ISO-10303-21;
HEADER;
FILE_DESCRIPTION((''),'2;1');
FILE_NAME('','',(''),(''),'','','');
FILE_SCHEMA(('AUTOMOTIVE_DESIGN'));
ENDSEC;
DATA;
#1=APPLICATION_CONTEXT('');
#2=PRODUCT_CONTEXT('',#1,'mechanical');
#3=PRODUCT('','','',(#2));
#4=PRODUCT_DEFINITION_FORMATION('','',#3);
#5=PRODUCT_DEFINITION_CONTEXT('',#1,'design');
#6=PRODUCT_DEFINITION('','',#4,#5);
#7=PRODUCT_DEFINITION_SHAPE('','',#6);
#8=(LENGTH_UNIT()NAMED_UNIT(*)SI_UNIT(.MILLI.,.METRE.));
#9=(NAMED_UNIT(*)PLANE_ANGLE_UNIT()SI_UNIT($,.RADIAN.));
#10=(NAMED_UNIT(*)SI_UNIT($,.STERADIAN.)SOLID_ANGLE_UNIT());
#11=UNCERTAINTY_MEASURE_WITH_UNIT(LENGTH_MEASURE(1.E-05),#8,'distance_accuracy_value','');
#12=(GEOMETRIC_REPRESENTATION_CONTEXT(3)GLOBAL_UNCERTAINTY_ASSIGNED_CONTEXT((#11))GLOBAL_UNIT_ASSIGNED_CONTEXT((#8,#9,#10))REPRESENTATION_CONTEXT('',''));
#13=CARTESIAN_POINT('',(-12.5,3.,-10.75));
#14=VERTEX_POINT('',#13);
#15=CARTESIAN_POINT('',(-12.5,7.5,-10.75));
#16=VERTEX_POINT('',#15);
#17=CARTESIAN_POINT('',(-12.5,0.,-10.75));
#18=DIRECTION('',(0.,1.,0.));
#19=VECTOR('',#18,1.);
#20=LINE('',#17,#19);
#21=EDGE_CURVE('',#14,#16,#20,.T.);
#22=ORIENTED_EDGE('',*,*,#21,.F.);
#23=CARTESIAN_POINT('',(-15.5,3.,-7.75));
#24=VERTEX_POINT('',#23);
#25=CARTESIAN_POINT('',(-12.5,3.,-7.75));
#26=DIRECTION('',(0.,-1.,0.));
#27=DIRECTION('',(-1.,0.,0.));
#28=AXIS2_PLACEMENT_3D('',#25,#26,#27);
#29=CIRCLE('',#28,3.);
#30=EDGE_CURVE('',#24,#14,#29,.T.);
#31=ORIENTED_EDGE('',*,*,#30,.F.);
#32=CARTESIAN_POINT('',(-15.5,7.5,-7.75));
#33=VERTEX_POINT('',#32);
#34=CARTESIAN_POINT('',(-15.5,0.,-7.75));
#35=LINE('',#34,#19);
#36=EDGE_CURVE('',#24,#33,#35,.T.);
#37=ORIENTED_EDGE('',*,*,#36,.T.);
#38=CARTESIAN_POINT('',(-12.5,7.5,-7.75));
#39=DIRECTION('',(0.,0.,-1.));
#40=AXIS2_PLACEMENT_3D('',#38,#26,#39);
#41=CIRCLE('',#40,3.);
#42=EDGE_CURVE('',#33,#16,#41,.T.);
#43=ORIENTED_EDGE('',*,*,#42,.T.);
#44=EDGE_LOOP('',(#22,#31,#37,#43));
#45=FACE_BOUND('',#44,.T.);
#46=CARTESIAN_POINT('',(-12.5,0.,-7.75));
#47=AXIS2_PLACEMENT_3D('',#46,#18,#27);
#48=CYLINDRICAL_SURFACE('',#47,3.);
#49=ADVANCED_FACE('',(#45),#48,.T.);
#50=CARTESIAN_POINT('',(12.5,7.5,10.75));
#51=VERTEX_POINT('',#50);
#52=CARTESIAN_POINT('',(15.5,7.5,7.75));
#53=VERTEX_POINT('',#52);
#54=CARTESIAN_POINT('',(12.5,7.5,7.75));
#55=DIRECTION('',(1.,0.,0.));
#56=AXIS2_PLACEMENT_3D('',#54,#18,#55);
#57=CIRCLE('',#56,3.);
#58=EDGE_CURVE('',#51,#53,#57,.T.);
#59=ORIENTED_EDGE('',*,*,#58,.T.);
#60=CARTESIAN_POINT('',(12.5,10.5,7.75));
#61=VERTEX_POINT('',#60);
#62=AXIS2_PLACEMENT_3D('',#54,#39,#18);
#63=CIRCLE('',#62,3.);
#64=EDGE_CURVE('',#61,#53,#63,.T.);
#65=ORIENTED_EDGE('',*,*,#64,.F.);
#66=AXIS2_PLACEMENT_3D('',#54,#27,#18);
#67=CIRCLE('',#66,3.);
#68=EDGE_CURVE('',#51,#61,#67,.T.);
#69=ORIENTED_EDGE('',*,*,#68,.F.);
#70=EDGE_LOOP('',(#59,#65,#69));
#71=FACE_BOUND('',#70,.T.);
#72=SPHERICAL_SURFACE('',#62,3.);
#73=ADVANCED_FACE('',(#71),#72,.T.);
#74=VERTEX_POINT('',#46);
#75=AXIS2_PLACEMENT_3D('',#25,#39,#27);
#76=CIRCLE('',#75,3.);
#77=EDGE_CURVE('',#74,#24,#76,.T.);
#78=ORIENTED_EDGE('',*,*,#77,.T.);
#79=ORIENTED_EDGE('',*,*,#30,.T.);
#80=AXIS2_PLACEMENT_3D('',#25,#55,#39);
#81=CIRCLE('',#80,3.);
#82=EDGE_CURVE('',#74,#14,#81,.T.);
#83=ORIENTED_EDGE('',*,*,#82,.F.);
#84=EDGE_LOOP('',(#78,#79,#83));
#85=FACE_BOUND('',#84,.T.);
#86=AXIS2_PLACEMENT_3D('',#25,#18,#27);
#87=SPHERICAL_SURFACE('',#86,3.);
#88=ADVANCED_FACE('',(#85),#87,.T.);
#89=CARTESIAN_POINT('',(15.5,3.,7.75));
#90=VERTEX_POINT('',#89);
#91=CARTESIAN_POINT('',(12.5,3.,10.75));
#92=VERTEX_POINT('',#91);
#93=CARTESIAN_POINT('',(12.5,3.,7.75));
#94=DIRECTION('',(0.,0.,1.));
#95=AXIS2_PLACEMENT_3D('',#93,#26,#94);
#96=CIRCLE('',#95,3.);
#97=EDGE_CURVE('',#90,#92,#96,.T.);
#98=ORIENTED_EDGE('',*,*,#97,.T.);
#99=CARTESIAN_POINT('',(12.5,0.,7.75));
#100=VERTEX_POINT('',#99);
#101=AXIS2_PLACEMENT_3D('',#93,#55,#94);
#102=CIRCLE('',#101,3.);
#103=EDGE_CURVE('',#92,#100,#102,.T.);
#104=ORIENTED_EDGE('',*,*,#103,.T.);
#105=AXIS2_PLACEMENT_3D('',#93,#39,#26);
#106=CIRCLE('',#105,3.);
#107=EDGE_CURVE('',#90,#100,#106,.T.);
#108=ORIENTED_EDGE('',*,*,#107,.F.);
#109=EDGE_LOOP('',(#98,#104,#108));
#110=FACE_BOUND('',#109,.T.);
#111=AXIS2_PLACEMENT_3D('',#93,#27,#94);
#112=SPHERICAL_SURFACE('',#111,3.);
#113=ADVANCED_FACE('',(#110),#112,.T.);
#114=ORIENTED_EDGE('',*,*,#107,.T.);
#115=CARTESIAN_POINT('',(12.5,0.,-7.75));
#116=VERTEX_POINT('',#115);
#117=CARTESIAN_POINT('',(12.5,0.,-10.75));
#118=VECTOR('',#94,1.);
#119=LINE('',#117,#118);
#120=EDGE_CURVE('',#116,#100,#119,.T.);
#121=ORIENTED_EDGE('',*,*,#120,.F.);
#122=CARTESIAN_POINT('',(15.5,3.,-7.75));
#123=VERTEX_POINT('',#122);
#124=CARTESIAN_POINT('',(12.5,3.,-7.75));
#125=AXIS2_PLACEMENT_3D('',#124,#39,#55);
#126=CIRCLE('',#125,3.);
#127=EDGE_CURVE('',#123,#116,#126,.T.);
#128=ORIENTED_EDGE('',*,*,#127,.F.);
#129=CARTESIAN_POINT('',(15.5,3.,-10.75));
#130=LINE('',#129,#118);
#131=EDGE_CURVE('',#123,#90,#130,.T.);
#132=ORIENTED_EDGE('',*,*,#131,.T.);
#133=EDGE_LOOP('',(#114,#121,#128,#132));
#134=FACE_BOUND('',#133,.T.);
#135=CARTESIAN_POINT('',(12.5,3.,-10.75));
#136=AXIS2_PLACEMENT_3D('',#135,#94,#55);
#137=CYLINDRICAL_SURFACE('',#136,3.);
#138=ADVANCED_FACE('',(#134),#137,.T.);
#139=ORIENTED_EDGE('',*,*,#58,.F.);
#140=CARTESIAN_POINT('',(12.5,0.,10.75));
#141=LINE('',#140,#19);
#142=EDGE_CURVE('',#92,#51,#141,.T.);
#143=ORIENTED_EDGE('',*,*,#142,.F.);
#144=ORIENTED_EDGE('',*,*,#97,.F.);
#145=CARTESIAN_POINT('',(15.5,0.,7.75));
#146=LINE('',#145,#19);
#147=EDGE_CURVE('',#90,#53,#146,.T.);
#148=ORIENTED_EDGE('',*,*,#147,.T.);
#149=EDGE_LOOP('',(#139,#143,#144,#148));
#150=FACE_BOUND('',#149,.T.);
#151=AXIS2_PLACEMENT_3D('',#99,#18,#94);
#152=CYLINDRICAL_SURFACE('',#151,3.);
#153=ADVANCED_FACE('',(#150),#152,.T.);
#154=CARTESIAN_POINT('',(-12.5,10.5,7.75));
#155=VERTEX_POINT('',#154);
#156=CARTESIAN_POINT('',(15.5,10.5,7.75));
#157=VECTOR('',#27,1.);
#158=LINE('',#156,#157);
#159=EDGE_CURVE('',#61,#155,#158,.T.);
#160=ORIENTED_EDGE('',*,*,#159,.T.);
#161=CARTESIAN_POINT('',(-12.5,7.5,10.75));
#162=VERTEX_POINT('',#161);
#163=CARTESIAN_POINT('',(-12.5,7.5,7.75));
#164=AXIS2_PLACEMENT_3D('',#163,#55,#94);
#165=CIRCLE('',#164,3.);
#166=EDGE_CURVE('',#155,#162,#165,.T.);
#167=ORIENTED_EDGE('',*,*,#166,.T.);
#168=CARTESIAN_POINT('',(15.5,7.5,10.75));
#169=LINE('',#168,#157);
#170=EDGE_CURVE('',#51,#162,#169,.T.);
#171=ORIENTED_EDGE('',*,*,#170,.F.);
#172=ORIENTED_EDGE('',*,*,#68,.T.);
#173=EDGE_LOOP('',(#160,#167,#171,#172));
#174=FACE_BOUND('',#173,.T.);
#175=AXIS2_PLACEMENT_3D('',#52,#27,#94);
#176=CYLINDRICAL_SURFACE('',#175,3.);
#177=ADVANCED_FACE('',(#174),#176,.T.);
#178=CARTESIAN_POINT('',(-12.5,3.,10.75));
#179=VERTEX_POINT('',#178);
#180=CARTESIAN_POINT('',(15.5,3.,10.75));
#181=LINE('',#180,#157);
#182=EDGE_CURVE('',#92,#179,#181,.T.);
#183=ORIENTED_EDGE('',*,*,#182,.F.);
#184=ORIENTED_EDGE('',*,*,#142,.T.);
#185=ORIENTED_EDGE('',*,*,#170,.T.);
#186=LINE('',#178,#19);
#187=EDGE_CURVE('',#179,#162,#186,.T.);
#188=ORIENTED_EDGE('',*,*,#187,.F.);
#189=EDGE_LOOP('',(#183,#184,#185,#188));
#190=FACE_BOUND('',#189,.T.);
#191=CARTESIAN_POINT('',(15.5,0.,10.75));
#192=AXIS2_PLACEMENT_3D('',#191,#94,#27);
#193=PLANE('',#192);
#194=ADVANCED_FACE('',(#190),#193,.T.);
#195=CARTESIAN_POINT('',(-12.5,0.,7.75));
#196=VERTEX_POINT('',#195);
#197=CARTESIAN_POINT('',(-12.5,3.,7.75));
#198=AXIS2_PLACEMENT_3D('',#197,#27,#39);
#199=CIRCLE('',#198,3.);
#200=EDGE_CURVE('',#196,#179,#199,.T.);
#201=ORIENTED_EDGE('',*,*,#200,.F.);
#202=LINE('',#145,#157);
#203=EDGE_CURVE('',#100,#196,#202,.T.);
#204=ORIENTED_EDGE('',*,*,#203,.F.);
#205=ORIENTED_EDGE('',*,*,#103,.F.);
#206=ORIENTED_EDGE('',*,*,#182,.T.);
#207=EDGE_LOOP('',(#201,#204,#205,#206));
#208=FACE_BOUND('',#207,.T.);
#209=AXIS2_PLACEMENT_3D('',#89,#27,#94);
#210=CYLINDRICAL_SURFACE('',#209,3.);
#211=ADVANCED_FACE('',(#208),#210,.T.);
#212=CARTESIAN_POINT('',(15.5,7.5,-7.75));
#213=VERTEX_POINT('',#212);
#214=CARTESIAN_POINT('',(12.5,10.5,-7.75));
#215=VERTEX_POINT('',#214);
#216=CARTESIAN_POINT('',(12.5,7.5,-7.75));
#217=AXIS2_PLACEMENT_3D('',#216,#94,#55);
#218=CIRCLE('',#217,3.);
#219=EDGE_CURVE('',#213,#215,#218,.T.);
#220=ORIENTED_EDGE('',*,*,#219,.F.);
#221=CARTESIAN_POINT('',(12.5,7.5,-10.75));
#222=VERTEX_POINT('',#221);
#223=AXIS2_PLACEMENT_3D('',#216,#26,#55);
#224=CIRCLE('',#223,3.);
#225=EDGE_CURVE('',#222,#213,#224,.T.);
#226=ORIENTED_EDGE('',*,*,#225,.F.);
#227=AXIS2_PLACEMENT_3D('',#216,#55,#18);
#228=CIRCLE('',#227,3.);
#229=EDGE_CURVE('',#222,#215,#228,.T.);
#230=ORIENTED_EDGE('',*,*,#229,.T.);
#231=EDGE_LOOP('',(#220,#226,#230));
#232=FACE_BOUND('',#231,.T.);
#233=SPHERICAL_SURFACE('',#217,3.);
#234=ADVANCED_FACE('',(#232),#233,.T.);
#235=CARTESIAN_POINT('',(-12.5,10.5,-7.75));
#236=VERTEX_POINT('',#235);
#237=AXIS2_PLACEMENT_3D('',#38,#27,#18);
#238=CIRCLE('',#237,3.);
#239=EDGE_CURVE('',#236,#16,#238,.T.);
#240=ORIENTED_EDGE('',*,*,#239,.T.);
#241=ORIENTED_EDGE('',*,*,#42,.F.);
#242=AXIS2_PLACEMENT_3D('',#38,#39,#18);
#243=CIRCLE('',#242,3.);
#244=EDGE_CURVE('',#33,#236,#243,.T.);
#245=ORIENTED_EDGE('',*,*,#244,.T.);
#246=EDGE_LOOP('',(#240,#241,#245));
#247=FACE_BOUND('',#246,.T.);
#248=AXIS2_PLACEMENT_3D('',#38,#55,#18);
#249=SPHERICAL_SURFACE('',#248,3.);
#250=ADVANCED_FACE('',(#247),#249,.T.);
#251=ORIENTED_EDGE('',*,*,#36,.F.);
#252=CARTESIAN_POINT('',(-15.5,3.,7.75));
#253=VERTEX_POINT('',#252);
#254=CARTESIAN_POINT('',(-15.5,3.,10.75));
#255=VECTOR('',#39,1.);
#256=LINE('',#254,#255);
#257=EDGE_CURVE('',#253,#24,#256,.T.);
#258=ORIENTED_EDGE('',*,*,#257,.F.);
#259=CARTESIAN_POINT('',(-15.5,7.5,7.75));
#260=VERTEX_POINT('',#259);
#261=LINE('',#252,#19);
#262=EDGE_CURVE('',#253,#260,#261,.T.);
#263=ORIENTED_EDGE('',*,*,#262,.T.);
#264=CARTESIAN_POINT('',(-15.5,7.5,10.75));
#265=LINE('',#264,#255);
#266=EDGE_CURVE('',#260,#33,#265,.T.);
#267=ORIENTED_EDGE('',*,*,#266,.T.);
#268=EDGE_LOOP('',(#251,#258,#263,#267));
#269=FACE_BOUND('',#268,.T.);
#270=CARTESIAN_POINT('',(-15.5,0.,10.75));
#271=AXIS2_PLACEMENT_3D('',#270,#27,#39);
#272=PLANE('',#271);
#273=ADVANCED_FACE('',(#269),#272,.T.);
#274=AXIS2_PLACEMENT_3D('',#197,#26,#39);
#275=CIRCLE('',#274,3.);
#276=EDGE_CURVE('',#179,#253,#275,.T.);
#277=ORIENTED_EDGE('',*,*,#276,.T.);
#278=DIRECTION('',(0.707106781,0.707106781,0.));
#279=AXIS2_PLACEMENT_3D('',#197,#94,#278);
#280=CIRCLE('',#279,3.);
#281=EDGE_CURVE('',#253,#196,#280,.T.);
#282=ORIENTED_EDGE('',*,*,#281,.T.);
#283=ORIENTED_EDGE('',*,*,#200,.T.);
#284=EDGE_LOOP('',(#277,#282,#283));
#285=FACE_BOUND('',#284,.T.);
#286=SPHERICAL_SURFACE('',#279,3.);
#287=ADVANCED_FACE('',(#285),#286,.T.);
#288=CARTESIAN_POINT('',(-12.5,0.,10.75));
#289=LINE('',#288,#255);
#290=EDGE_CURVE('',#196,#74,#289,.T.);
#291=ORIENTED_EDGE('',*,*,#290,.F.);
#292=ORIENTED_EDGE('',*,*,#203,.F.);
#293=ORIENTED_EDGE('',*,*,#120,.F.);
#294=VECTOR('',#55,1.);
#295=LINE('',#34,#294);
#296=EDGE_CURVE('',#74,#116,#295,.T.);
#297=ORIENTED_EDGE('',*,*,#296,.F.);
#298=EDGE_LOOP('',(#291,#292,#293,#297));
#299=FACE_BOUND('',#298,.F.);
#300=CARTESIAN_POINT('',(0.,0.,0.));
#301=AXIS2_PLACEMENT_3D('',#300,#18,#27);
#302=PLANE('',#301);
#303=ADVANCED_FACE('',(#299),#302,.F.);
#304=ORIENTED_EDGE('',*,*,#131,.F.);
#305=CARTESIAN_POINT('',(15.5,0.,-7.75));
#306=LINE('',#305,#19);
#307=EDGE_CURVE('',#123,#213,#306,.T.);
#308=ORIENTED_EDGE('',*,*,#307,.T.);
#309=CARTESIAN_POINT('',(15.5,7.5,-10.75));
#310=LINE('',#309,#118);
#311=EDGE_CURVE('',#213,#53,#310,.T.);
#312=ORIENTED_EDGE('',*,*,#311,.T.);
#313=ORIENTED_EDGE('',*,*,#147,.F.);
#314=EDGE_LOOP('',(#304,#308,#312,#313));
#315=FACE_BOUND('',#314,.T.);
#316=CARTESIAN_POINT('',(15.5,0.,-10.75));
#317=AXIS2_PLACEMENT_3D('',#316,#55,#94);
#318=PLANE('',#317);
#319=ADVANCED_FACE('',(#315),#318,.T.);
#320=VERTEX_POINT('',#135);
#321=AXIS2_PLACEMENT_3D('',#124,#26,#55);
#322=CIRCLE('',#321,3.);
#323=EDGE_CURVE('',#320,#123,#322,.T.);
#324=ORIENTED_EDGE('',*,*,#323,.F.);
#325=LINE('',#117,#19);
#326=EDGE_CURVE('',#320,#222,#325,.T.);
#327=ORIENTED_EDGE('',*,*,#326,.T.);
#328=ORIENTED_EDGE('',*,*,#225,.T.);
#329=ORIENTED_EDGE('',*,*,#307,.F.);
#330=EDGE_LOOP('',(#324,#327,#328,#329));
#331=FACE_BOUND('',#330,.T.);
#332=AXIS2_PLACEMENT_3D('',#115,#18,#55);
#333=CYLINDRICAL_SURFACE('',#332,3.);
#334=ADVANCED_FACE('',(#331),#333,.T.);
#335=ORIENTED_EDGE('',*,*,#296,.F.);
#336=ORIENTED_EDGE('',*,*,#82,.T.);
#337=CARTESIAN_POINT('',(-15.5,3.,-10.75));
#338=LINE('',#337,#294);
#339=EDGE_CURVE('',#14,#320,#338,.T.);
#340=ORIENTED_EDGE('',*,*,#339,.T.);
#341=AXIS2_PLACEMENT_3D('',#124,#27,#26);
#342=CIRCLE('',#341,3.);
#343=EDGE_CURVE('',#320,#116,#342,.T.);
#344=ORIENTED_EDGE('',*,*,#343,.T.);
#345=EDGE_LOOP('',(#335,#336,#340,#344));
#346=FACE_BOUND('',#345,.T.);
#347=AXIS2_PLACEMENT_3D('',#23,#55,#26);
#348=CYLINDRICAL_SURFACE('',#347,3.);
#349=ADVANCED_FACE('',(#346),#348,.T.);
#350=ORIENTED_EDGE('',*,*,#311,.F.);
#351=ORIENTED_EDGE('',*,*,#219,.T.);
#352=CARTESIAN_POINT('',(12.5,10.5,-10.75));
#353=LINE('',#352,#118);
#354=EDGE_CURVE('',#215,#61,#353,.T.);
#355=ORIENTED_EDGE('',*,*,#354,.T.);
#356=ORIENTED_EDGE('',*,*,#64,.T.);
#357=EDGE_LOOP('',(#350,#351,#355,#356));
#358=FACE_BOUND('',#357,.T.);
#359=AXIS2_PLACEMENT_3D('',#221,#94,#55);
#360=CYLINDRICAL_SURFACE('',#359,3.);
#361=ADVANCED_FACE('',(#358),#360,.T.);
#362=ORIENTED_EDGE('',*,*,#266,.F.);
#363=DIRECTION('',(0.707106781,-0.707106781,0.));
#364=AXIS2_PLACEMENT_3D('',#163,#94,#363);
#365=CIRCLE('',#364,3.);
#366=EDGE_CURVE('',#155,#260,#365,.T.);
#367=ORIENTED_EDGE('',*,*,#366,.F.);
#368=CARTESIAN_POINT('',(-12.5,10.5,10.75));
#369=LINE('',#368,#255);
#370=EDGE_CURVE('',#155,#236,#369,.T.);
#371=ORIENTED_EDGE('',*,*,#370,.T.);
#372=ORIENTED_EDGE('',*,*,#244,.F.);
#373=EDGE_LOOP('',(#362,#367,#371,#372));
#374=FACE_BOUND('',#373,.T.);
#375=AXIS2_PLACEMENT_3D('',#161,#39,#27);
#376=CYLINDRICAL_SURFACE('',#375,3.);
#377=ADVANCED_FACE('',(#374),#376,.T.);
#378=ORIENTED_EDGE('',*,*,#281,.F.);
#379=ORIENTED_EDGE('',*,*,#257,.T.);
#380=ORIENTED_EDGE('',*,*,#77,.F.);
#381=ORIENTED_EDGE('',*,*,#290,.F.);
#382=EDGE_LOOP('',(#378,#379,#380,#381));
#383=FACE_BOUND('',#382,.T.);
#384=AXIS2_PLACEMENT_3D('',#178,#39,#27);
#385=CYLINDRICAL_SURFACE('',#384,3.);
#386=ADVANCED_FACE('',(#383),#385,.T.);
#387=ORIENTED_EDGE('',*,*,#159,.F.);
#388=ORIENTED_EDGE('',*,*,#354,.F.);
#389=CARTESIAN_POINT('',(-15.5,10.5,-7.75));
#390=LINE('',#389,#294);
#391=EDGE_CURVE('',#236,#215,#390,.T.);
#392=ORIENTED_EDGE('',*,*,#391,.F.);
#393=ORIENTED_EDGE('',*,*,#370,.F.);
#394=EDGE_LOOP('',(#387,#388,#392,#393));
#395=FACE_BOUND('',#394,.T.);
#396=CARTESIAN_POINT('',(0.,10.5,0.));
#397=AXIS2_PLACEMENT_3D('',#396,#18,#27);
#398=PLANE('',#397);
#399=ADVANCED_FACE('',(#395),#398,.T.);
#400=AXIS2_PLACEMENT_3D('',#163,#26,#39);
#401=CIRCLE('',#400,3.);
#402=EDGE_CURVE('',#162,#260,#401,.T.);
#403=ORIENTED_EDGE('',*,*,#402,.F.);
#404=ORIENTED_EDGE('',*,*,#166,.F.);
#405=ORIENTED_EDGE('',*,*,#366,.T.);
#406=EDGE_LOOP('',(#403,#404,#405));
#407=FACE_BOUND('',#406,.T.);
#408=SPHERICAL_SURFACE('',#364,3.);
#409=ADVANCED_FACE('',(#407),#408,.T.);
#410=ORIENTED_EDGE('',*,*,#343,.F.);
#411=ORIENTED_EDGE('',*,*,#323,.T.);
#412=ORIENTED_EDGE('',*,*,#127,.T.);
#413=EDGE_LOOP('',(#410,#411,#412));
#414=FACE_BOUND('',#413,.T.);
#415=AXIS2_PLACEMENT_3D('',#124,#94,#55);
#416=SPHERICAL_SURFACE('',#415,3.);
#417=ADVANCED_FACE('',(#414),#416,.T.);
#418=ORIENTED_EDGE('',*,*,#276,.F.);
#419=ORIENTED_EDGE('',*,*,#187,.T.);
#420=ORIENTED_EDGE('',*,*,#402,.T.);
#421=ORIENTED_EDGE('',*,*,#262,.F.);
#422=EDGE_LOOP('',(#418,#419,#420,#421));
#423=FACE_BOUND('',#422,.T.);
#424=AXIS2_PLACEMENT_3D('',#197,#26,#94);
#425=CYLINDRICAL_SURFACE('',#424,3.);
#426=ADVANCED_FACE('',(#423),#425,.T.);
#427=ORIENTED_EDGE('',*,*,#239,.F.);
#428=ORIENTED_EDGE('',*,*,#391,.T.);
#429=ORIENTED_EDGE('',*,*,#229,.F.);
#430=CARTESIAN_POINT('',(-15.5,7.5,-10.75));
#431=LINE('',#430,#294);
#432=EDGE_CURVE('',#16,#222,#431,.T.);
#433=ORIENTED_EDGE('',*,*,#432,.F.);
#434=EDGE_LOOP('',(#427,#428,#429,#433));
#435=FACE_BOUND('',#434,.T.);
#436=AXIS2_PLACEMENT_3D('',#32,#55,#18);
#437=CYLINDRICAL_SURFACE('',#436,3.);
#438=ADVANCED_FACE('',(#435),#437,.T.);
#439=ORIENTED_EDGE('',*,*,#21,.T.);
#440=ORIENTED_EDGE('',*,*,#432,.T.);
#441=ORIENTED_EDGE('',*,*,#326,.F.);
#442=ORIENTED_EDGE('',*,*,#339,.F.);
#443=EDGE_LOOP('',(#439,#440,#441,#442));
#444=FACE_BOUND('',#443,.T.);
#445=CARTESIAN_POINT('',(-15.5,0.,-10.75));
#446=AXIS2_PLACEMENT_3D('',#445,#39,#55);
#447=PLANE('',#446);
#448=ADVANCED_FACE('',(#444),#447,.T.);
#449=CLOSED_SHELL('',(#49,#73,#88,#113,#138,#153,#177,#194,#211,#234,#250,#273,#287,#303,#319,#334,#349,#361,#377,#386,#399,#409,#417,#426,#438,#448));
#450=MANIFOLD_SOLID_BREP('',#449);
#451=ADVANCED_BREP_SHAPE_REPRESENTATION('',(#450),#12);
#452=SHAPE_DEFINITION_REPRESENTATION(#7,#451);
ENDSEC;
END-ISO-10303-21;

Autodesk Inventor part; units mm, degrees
ref_plane "YZ Plane" through (0, 0, 0) normal (1, 0, 0) x (0, 1, 0)
ref_plane "XZ Plane" through (0, 0, 0) normal (0, 1, 0) x (-1, 0, 0)
ref_plane "XY Plane" through (0, 0, 0) normal (0, 0, 1) x (1, 0, 0)
sketch "スケッチ1" plane through (0, 0, 0) normal (0, 1, 0) x (-1, 0, 0)
  line L0 (15.5, -10.75) -> (-15.5, -10.75)
  line L1 (-15.5, -10.75) -> (-15.5, 10.75)
  line L2 (-15.5, 10.75) -> (15.5, 10.75)
  line L3 (15.5, 10.75) -> (15.5, -10.75)
  line L4 (15.5, -10.75) -> (-15.5, 10.75)
  point P0 (0, 0)
  point P1 (0, 0)
  dimension "d0" = 31
  dimension "d1" = 21.5
extrude "押し出し1" add sketch "スケッチ1" along normal blind 10.5
fillet "フィレット1" radius 3 11 edges at (15.5, 10.5, 0) (0, 10.5, 10.75) (0, 0, 10.75) (15.5, 5.25, 10.75) (15.5, 0, 0) (15.5, 5.25, -10.75) (0, 10.5, -10.75) (-15.5, 10.5, 0) (-15.5, 5.25, -10.75) (-15.5, 0, 0) (0, 0, -10.75)
ref_plane "作業平面1" through (0, 3, -7.75) normal (1, 0, 0) x (0, 0, -1)
fillet "フィレット2" radius 3 3 edges at (-14.6213, 9.6213, 9.8713) (-14.6213, 0.8787, 9.8713) (-15.5, 5.25, 10.75)
properties part number "battery" material "LCP プラスチック"
